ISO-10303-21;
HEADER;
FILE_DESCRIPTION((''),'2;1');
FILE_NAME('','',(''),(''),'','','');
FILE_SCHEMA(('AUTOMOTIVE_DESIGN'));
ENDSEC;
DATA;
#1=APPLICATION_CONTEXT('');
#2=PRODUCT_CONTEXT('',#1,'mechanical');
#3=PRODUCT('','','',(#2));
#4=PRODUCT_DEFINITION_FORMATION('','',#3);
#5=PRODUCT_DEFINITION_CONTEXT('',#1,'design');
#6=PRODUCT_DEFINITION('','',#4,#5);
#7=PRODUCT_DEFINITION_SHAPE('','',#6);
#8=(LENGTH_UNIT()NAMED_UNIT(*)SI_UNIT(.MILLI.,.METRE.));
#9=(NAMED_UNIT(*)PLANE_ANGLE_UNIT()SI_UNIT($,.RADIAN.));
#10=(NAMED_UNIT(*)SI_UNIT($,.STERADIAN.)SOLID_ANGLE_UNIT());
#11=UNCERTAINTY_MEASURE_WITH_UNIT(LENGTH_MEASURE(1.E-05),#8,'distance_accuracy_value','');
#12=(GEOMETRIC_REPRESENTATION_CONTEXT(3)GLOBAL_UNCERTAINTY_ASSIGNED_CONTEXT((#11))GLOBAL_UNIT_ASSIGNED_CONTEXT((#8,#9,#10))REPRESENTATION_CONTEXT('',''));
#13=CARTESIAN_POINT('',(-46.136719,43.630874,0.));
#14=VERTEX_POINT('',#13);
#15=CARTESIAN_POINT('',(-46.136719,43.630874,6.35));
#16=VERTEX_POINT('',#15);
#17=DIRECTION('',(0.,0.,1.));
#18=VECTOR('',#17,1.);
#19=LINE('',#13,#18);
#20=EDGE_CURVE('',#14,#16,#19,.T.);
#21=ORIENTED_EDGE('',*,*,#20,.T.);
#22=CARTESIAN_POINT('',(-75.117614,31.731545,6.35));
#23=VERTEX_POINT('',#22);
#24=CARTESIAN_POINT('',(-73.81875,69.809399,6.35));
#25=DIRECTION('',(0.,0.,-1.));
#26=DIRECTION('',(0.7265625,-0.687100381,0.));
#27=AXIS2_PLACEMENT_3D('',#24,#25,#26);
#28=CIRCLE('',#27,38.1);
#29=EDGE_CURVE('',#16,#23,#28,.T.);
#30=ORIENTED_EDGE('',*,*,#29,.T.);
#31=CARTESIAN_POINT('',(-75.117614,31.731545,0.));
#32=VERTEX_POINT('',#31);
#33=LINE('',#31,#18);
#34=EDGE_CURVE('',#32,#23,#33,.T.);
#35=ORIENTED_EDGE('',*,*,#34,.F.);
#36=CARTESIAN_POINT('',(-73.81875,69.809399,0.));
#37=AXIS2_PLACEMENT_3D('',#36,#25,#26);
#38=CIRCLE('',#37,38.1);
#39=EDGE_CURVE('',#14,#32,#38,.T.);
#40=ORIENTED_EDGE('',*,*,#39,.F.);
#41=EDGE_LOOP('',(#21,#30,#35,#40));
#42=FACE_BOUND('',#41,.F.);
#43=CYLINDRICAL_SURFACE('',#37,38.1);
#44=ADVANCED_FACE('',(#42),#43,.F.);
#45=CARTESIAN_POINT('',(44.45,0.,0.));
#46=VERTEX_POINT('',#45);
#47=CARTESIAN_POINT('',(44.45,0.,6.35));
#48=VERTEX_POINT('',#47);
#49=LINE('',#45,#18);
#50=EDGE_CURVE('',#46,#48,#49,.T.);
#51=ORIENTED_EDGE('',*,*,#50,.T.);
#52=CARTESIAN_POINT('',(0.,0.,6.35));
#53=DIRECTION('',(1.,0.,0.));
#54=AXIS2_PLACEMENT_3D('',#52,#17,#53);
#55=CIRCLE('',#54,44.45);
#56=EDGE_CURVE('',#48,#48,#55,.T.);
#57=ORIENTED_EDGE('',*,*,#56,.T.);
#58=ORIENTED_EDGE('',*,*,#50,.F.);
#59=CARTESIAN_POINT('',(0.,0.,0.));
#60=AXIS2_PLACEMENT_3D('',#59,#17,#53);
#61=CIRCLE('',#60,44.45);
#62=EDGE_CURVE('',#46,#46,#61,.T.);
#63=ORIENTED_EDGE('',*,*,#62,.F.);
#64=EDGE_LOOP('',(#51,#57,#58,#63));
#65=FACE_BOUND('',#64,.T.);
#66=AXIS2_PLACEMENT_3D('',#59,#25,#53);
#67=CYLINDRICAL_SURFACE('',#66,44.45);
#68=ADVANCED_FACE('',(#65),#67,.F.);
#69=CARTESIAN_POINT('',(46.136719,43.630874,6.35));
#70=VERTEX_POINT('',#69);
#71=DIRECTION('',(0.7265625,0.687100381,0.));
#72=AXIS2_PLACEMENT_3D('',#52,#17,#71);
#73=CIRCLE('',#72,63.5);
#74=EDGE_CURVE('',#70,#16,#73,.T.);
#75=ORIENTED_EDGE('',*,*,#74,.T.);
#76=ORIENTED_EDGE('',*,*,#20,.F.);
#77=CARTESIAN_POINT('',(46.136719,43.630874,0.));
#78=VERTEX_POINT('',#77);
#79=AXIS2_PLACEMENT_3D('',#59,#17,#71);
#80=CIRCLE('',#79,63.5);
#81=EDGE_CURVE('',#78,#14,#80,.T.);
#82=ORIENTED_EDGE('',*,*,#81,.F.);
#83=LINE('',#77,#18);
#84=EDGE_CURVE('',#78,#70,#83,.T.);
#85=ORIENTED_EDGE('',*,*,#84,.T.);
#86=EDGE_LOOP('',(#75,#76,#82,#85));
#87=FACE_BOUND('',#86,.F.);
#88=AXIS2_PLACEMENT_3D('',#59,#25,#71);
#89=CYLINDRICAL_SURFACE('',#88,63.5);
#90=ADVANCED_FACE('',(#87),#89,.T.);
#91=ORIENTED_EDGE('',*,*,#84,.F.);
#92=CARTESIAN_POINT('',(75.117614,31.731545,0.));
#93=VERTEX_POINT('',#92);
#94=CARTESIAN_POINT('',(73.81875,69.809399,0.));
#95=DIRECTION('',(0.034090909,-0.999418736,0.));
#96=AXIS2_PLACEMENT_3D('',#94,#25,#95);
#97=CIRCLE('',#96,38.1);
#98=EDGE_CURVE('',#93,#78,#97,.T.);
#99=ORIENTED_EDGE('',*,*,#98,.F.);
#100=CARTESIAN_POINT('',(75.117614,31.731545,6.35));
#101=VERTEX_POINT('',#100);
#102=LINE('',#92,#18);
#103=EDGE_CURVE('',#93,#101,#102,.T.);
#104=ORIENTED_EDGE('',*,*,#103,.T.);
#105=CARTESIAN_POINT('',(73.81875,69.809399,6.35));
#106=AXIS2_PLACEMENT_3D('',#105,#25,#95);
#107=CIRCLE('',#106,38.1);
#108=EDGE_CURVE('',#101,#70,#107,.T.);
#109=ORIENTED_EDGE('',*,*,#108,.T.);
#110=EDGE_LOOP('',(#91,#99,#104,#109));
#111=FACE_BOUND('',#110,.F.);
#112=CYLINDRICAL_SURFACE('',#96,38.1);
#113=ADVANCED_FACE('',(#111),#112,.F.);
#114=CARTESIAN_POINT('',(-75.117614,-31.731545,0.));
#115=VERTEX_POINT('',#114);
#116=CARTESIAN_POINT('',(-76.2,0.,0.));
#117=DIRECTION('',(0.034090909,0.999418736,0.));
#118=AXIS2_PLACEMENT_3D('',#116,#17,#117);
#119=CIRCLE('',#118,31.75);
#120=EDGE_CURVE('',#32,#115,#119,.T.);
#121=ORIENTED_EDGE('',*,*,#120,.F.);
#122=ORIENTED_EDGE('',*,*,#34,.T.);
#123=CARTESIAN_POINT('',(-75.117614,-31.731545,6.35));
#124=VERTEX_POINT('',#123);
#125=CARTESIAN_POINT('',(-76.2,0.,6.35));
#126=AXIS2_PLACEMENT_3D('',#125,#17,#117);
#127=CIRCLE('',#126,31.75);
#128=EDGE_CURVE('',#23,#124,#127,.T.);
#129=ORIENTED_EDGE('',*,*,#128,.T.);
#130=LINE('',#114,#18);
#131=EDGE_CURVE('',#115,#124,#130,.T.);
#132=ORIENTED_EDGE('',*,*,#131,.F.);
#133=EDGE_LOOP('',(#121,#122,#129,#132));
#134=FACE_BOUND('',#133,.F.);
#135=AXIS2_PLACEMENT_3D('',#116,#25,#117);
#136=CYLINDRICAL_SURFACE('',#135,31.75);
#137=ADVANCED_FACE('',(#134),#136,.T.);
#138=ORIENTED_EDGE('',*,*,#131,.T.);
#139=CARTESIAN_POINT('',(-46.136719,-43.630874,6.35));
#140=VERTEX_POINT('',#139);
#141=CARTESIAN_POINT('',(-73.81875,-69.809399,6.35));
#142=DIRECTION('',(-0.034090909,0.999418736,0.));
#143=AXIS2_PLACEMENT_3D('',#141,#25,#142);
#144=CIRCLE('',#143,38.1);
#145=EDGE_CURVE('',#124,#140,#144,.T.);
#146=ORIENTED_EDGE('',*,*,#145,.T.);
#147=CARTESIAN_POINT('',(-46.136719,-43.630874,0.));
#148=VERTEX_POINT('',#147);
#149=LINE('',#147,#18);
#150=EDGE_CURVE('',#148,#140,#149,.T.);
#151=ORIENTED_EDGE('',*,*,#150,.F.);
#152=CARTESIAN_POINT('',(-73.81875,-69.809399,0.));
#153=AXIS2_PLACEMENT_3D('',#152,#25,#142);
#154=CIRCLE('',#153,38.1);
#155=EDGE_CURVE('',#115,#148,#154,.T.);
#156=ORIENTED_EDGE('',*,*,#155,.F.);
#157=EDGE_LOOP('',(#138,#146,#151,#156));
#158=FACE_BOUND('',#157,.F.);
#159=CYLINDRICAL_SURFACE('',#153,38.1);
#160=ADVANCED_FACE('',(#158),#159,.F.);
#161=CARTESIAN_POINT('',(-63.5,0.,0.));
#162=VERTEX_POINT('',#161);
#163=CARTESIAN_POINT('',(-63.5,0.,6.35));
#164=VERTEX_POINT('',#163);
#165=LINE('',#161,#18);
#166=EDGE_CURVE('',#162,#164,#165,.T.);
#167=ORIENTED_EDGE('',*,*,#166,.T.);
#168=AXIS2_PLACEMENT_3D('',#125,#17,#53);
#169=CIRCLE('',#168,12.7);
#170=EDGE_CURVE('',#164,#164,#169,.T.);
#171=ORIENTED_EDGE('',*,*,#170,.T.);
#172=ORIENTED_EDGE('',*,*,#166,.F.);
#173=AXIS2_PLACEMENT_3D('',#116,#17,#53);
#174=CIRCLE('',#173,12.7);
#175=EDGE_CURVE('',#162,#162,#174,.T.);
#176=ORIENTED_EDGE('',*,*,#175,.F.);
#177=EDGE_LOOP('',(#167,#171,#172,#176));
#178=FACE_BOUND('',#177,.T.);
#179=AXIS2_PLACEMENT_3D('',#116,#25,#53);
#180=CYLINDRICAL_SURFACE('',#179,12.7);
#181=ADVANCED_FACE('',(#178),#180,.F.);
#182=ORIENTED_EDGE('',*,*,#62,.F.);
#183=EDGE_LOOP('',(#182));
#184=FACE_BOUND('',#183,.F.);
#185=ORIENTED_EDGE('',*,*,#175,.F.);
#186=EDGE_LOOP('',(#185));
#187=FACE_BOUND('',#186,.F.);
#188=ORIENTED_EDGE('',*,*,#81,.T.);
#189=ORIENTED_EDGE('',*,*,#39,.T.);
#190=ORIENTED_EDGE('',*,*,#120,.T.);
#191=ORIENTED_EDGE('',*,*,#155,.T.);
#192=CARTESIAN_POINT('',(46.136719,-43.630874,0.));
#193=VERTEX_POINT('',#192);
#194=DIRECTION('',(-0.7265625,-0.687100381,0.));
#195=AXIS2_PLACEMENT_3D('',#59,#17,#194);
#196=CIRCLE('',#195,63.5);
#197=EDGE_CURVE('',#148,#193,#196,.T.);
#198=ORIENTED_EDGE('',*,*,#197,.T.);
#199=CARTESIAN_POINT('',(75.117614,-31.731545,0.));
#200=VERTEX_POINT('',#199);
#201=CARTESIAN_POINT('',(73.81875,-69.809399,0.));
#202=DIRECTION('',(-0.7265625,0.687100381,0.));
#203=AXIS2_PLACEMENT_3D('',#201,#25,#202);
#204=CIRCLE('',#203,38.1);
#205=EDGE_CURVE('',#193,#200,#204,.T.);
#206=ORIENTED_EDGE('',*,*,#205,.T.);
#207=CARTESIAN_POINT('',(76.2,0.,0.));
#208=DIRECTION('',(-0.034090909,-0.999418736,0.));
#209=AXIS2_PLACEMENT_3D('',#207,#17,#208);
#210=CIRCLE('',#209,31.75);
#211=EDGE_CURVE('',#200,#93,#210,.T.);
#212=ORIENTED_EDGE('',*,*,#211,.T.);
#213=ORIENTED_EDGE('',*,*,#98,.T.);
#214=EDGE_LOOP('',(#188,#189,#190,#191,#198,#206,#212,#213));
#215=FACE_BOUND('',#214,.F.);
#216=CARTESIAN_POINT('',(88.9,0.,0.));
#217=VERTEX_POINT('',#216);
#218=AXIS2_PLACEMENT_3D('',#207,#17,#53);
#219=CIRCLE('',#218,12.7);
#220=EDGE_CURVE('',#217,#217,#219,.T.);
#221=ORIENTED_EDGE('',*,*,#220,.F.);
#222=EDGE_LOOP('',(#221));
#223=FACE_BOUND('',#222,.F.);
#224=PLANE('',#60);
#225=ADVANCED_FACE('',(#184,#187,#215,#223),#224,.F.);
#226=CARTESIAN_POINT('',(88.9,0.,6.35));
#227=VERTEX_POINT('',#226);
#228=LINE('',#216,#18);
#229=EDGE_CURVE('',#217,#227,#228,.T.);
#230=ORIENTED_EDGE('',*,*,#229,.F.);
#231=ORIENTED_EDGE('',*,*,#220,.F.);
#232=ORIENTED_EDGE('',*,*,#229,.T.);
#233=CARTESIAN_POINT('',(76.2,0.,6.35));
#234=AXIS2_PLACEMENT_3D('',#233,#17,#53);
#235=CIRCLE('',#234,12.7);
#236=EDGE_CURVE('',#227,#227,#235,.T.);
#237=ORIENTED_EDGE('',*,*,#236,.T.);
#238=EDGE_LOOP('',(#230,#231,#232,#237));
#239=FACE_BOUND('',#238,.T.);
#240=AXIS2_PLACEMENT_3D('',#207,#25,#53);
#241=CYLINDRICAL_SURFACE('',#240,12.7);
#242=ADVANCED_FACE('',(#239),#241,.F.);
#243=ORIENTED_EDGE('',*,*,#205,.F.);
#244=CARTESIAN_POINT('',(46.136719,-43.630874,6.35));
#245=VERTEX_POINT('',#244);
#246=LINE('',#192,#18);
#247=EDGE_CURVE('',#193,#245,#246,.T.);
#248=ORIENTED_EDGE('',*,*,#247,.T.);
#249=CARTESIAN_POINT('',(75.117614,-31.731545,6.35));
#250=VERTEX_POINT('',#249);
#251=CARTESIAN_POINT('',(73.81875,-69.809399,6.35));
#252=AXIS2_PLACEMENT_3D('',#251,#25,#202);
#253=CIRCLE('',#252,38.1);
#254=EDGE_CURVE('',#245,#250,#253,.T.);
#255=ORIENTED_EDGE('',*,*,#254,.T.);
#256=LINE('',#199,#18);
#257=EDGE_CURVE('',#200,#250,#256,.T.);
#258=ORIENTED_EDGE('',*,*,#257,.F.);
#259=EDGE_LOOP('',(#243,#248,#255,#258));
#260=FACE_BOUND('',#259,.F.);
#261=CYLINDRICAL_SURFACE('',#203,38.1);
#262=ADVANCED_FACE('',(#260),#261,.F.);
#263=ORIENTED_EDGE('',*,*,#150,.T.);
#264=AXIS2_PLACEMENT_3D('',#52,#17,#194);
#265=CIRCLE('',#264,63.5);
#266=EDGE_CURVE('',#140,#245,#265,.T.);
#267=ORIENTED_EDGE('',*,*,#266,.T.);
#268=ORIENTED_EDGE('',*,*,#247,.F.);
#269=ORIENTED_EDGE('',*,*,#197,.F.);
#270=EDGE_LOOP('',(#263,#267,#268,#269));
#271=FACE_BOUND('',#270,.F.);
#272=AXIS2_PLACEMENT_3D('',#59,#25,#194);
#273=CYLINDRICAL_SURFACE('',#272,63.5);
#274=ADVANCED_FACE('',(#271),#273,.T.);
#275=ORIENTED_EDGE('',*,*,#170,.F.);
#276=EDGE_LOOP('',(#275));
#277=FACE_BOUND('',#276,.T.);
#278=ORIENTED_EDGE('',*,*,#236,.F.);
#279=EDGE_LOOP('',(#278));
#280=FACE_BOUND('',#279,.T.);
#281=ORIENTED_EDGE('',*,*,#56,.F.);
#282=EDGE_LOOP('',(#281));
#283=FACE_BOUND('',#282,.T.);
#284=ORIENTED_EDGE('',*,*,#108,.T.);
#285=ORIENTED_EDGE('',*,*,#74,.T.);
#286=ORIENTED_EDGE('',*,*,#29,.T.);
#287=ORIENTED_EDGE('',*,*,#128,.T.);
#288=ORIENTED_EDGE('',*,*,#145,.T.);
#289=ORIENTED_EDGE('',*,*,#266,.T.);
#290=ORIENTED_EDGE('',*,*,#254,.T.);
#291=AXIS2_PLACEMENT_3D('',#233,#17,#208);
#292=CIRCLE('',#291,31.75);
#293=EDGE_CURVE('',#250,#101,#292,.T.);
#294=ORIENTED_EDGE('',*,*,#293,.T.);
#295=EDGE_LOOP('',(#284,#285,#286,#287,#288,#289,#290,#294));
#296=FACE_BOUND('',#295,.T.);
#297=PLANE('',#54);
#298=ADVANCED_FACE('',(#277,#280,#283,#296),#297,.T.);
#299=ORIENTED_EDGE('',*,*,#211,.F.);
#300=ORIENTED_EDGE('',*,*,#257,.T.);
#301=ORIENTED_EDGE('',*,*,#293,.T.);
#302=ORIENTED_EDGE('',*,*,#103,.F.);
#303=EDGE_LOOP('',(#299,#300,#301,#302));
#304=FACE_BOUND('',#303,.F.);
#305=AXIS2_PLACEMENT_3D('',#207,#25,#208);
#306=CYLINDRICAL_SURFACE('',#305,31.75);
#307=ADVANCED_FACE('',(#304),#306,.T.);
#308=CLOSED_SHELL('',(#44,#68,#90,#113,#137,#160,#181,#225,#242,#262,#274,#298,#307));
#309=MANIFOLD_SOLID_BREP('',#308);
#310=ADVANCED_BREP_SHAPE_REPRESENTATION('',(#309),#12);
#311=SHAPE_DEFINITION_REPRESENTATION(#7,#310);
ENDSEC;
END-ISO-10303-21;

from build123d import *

# Parameters (mm, degrees)
F0_R     = 12.7
F0_R_2   = 44.45
F1_DEPTH = 6.35


# Not quite as in the source:
# - a feature names something its author has since deleted; it is built from what else it names


with BuildPart() as f1:
    # F0 (on Top) → F1 (new body)
    with BuildSketch(Plane.XY):
        with BuildLine():
            ThreePointArc((-46.13671875, 43.6308741946), (-59.3475236203, 34.5646316236), (-75.1176136364, 31.7315448688))
            ThreePointArc((-75.1176136364, 31.7315448688), (-107.95, 0), (-75.1176136364, -31.7315448688))
            ThreePointArc((-75.1176136364, -31.7315448688), (-59.3475236203, -34.5646316236), (-46.13671875, -43.6308741946))
            ThreePointArc((-46.13671875, -43.6308741946), (0, -63.5), (46.13671875, -43.6308741946))
            ThreePointArc((46.13671875, -43.6308741946), (59.3475236203, -34.5646316236), (75.1176136364, -31.7315448688))
            ThreePointArc((75.1176136364, -31.7315448688), (107.95, 0), (75.1176136364, 31.7315448688))
            ThreePointArc((75.1176136364, 31.7315448688), (59.3475236203, 34.5646316236), (46.13671875, 43.6308741946))
            ThreePointArc((46.13671875, 43.6308741946), (0, 63.5), (-46.13671875, 43.6308741946))
        make_face()
        with Locations((-76.2, 0)):
            Circle(F0_R, mode=Mode.SUBTRACT)
        Circle(F0_R_2, mode=Mode.SUBTRACT)
        with Locations((76.2, 0)):
            Circle(F0_R, mode=Mode.SUBTRACT)
    extrude(amount=F1_DEPTH)


solid = f1.part
